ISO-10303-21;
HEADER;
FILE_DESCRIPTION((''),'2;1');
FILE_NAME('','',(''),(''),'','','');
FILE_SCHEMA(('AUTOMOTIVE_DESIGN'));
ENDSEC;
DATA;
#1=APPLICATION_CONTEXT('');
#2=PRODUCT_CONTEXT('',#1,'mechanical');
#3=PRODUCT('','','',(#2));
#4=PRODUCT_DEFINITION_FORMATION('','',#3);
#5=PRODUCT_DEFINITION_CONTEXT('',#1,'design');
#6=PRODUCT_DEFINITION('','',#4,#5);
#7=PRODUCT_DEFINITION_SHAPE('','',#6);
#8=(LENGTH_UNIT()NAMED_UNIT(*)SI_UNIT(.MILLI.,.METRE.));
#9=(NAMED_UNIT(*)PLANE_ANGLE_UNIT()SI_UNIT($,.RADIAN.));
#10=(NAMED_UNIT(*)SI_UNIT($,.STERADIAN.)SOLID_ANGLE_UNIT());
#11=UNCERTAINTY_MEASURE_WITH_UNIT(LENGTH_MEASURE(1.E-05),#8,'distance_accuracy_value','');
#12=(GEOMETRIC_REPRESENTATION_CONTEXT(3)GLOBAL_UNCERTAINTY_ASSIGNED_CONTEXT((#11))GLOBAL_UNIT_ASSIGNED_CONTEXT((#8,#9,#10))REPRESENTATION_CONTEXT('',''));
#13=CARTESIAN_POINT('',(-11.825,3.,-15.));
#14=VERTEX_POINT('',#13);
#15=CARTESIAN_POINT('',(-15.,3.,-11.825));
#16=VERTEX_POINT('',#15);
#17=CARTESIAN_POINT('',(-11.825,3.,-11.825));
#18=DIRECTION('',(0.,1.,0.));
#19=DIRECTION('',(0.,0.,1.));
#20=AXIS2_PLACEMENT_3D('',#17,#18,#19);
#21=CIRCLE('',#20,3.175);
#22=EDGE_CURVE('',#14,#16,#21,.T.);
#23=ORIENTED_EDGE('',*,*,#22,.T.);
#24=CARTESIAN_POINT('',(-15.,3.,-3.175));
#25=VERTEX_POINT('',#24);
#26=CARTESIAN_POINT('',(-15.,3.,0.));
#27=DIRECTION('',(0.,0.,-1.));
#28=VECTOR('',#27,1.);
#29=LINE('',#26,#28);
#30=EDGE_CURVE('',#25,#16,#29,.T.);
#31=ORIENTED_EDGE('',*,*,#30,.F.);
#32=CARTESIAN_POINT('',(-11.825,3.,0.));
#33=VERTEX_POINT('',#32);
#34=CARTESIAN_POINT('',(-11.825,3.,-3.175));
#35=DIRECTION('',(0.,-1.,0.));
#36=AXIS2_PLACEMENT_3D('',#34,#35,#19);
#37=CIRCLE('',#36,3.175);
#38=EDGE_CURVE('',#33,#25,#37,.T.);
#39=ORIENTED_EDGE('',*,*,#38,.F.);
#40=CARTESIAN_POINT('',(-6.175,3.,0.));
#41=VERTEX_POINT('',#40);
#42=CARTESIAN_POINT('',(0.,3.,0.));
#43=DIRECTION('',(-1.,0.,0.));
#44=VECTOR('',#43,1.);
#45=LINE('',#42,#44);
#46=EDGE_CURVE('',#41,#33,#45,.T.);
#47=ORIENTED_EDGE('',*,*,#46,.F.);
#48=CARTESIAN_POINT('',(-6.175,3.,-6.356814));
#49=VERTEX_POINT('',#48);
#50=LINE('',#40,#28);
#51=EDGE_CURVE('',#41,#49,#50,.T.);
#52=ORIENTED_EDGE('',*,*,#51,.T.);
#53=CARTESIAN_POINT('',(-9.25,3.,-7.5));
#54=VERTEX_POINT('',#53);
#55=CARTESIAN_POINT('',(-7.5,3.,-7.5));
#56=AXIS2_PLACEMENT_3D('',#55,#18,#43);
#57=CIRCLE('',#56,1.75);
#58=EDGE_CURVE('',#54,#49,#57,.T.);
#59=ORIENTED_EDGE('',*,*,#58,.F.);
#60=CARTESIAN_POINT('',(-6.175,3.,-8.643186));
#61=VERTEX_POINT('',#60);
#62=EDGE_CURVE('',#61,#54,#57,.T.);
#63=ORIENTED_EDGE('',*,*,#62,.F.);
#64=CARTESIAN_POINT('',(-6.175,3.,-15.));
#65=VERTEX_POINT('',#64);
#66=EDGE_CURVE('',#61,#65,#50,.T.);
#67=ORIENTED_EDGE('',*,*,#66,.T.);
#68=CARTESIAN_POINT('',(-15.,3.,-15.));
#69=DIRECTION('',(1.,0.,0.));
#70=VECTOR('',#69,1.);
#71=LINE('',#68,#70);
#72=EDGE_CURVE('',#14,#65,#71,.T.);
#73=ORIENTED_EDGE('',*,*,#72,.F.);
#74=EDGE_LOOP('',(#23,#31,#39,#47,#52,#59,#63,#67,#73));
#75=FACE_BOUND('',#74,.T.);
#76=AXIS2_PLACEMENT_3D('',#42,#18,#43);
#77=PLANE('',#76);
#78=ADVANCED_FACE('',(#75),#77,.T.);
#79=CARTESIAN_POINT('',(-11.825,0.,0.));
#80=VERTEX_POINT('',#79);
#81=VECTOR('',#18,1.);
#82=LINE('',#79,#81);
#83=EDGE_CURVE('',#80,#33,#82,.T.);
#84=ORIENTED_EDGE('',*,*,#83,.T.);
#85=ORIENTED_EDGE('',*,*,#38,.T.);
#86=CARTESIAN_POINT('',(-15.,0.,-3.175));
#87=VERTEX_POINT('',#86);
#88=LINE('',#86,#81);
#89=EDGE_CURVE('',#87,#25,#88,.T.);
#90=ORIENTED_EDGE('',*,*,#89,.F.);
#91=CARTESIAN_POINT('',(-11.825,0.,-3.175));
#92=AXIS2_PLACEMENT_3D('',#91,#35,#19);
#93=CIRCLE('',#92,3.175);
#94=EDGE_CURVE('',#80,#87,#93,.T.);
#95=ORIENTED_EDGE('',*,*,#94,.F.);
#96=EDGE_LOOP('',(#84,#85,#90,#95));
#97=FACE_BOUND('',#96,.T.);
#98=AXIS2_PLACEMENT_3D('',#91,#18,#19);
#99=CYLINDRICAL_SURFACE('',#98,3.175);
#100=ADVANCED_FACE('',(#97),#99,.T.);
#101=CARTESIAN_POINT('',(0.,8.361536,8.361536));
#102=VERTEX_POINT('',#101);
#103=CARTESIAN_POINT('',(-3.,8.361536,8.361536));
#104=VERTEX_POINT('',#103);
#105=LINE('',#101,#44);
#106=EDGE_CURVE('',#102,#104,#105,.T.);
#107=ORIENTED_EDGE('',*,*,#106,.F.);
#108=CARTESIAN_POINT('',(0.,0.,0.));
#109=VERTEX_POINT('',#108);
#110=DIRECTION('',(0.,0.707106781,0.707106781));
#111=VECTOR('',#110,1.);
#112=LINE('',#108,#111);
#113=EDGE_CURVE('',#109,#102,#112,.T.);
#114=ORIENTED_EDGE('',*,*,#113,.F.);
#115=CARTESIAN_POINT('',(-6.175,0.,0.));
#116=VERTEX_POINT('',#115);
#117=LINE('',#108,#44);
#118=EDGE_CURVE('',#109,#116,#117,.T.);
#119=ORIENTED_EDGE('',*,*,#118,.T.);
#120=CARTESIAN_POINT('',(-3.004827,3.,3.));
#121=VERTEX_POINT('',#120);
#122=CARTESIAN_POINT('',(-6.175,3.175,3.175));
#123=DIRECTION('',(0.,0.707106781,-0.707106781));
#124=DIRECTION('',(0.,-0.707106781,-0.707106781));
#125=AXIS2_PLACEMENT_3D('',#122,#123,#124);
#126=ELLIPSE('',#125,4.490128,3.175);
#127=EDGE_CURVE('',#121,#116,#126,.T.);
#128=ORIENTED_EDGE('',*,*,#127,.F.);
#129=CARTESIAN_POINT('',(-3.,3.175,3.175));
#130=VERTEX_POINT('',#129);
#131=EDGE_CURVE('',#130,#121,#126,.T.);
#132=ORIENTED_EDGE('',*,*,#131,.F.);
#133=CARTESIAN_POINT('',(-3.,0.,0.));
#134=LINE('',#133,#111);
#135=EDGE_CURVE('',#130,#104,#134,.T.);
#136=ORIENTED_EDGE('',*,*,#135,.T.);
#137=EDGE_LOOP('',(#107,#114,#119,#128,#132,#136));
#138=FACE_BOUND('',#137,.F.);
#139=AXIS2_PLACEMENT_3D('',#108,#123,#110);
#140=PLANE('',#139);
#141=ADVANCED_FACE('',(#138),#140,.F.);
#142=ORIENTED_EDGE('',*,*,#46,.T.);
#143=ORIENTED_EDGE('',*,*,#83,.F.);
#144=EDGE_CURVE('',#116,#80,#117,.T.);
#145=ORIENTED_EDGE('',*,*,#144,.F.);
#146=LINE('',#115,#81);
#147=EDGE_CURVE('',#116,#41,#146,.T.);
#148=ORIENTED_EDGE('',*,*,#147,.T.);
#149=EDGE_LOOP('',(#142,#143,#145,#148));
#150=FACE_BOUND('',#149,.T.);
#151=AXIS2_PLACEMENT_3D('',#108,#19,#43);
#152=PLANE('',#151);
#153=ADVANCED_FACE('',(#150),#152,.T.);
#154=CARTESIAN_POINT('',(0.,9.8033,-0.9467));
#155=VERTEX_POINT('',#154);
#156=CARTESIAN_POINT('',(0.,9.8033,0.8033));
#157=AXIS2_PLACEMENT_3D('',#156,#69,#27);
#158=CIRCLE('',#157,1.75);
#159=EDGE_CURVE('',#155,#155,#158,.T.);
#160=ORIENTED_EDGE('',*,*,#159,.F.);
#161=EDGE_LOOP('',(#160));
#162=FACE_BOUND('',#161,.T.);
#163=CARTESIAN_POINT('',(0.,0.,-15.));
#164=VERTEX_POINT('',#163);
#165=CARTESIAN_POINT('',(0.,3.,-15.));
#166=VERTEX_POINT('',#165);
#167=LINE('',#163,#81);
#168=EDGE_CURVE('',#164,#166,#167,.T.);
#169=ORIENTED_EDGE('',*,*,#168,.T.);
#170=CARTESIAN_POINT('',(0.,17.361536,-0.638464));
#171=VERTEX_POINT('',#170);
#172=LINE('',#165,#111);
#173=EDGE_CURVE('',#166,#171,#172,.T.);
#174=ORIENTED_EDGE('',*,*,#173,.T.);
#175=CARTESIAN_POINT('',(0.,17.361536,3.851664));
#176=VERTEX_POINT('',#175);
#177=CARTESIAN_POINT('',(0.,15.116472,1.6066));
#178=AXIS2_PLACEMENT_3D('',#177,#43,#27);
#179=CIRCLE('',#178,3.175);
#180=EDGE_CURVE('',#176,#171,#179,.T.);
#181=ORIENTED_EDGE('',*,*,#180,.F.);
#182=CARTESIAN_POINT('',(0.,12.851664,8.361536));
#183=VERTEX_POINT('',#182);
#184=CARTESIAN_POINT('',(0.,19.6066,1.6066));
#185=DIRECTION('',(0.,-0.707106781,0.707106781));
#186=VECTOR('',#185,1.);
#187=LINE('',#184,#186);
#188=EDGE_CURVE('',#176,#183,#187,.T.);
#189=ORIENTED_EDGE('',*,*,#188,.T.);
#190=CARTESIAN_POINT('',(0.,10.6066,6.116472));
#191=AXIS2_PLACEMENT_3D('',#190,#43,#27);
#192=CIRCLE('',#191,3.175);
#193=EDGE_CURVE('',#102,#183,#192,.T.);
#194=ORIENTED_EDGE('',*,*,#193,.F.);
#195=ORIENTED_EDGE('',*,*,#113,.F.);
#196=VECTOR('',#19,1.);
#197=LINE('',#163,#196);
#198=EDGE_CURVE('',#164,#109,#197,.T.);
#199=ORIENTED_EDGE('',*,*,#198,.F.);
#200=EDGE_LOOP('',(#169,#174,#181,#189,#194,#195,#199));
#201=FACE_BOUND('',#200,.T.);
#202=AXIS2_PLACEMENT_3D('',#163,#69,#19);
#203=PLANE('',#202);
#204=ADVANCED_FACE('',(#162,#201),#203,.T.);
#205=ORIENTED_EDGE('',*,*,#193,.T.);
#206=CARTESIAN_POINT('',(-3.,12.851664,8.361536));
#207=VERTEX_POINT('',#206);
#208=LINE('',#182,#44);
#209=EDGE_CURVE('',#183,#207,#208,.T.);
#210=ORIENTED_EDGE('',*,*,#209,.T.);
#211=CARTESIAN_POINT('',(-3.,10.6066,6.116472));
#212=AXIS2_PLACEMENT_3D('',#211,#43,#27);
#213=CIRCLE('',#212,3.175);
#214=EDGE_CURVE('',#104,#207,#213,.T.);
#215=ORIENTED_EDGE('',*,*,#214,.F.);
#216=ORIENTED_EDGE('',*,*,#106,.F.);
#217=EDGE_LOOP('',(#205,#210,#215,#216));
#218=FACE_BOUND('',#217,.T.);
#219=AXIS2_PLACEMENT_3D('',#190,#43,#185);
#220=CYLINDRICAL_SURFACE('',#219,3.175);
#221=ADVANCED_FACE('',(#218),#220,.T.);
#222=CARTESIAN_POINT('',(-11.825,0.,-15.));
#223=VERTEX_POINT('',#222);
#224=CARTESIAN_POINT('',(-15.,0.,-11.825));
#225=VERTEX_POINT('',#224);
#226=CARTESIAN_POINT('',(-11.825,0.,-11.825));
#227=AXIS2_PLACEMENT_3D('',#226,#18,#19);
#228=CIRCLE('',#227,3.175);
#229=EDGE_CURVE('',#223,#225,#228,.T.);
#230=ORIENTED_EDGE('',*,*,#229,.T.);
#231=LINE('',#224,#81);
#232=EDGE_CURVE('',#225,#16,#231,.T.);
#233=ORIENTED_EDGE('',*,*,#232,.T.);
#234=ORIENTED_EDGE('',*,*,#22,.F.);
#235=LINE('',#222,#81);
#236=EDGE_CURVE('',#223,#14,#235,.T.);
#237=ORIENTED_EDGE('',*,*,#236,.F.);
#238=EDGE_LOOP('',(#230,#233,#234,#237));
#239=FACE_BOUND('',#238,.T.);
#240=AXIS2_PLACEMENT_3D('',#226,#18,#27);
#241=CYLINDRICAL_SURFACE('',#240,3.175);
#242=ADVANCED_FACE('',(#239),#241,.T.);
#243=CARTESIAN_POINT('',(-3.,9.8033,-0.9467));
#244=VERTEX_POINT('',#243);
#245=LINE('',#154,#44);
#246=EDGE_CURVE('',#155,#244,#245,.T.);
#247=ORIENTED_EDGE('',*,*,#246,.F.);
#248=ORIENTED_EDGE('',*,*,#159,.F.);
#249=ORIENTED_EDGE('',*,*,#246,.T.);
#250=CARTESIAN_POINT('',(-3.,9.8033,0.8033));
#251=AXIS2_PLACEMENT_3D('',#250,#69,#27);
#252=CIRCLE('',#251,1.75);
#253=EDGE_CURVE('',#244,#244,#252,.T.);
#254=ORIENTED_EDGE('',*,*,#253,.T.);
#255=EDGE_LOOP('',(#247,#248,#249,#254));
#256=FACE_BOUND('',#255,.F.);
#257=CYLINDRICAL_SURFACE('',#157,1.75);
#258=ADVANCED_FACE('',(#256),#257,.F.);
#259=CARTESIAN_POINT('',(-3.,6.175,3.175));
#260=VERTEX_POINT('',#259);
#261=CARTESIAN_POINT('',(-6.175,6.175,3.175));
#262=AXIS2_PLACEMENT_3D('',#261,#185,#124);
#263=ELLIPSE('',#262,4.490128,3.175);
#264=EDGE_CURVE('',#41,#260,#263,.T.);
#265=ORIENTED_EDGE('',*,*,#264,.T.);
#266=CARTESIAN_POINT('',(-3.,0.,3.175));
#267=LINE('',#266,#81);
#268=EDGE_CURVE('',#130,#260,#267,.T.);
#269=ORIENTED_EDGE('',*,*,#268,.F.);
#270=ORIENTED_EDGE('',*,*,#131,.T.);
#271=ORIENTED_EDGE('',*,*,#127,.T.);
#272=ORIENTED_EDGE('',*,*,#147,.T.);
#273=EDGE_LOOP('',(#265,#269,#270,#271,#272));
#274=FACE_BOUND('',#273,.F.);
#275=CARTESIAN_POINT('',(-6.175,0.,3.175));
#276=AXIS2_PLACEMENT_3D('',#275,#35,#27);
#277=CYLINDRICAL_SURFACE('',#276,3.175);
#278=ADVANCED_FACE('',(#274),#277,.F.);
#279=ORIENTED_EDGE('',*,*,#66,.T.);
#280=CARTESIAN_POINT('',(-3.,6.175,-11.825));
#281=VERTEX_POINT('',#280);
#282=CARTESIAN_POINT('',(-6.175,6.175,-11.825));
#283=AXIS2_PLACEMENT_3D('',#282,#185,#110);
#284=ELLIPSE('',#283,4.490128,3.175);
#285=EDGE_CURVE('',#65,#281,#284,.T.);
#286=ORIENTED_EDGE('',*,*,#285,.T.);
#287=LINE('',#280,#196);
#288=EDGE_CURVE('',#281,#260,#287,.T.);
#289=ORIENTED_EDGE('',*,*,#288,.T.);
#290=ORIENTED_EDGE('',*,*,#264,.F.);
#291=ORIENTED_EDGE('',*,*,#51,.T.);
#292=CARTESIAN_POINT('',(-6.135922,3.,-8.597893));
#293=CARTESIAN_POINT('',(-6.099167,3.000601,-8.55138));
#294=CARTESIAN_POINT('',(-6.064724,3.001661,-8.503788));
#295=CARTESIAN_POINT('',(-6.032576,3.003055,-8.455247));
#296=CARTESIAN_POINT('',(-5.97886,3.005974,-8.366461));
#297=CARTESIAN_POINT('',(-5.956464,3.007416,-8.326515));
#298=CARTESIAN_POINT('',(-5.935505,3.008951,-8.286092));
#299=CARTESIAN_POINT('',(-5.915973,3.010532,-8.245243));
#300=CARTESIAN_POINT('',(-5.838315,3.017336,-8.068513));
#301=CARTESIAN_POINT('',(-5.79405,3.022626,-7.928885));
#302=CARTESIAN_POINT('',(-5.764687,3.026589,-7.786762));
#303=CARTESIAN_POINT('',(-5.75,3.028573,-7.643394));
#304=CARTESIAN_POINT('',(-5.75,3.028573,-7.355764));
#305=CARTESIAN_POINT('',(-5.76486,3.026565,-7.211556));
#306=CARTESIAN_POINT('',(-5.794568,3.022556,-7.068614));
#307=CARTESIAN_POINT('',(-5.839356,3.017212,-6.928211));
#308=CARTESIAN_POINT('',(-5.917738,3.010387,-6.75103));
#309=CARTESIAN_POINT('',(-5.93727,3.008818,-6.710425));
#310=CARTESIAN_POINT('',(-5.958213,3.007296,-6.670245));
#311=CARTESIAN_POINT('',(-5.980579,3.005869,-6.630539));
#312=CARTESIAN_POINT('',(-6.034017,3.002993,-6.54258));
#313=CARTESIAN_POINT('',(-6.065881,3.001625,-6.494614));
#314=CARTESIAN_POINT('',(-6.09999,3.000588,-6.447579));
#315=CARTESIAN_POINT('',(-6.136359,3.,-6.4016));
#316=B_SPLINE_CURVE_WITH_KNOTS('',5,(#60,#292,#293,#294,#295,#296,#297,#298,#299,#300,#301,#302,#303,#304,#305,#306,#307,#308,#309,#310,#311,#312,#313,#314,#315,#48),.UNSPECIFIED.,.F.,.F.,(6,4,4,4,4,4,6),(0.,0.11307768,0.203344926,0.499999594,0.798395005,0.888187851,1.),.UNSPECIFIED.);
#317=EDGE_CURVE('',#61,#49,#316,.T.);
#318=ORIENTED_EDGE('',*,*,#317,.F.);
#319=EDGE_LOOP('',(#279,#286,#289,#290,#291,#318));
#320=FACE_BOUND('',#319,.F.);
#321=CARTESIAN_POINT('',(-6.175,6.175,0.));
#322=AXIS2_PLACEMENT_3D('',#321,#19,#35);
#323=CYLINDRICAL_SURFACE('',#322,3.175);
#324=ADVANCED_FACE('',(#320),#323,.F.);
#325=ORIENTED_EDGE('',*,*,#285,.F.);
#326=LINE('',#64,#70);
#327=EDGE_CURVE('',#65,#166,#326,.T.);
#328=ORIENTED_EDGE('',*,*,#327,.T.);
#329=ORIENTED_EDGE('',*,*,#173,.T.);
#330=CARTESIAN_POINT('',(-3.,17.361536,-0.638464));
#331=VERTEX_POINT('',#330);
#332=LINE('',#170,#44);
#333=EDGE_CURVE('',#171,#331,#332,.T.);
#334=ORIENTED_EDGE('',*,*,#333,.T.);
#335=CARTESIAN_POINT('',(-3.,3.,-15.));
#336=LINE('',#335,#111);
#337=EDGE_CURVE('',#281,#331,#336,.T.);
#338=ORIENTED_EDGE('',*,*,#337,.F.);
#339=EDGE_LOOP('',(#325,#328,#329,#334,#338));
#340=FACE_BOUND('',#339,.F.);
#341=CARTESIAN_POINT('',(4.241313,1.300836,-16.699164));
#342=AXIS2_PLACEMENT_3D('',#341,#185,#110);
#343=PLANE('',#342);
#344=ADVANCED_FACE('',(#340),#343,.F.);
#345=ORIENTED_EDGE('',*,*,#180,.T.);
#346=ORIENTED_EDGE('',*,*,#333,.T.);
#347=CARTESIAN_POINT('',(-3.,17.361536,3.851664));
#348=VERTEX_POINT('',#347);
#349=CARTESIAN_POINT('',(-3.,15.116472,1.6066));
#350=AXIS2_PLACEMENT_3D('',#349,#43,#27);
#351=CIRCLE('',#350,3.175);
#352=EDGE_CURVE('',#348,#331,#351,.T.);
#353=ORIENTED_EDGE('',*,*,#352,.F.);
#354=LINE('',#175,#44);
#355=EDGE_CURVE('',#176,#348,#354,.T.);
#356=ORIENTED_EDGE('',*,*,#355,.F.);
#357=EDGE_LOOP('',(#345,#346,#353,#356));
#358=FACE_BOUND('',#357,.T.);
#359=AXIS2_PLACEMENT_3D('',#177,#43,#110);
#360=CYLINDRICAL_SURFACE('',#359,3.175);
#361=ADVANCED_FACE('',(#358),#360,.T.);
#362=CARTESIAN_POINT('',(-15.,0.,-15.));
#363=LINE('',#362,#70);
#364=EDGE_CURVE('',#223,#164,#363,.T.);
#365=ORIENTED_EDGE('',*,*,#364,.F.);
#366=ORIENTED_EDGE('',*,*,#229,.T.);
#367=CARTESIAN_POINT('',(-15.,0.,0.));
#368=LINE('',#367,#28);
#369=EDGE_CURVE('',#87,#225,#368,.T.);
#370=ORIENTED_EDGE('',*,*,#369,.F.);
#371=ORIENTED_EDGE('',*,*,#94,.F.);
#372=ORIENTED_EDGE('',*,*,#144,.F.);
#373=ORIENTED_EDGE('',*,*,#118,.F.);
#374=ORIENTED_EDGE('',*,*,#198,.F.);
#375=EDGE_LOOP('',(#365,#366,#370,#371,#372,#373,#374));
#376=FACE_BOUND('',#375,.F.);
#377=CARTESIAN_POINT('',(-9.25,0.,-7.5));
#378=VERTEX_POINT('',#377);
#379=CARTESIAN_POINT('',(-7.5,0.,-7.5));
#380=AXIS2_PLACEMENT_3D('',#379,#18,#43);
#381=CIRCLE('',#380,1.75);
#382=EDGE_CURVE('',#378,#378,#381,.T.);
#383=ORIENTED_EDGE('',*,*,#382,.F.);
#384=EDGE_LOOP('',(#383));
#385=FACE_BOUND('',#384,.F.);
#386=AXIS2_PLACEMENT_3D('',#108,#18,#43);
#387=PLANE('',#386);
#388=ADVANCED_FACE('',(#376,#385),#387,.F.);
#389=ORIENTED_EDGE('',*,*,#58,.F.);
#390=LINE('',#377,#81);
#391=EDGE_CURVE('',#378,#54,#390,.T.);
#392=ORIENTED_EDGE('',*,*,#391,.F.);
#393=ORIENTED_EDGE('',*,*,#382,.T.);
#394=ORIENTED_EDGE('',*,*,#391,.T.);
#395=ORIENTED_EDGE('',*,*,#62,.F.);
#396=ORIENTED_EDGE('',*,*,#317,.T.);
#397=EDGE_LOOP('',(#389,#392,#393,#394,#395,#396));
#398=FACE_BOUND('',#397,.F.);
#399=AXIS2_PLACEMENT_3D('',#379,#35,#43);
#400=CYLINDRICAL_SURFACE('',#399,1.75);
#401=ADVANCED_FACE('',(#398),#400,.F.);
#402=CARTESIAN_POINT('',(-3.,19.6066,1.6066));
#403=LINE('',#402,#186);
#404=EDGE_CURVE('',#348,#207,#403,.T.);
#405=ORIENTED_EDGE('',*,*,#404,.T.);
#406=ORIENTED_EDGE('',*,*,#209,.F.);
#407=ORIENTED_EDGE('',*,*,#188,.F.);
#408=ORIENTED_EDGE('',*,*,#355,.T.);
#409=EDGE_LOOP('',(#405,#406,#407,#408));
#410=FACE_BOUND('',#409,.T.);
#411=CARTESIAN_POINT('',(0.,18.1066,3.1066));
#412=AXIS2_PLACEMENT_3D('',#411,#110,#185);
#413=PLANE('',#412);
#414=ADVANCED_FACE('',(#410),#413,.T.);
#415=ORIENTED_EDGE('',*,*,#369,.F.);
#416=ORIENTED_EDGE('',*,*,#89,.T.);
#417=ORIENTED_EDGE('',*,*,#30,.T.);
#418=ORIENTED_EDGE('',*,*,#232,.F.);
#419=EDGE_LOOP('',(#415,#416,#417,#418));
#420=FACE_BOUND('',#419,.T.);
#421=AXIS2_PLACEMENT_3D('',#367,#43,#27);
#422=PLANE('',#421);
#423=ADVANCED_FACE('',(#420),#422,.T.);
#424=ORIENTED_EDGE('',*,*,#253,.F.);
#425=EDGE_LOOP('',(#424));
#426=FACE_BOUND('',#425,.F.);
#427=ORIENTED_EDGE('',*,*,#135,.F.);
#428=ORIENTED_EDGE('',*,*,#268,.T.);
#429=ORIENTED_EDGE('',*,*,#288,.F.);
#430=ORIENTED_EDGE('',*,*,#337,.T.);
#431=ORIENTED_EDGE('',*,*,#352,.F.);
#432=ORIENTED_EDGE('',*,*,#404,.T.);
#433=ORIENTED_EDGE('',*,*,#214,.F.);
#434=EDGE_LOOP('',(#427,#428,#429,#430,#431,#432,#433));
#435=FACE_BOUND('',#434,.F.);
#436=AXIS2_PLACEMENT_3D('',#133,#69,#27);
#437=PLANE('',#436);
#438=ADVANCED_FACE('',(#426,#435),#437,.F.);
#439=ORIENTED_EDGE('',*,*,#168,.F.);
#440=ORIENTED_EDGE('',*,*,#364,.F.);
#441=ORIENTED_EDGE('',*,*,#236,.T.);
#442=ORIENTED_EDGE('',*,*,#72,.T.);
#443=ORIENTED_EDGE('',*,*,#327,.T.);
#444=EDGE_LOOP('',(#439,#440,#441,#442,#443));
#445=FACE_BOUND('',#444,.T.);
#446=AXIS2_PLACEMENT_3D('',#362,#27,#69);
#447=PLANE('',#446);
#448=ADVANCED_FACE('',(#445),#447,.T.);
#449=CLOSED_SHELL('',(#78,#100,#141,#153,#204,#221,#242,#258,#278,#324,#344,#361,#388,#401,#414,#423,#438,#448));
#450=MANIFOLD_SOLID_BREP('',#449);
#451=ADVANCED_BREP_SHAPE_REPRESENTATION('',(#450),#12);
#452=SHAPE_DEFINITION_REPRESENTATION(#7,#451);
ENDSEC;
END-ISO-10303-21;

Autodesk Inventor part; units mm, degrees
ref_plane "YZ Plane" through (0, 0, 0) normal (1, 0, 0) x (0, 1, 0)
ref_plane "XZ Plane" through (0, 0, 0) normal (0, 1, 0) x (-1, 0, 0)
ref_plane "XY Plane" through (0, 0, 0) normal (0, 0, 1) x (1, 0, 0)
sketch "Sketch1" plane through (0, 0, 0) normal (0, 1, 0) x (-1, 0, 0)
  line L0 (0, 0) -> (15, 0)
  line L1 (15, 0) -> (15, -15)
  line L2 (15, -15) -> (0, -15)
  line L3 (0, -15) -> (0, 0)
  circle A0 centre (7.5, -7.5) radius 1.75
  dimension "d0" = 15
  dimension "d1" = 15
  dimension "d2" = 3.5
extrude "Extrusion1" add sketch "Sketch1" along normal blind 3
sketch "Sketch2" plane through (0, 0, 0) normal (1, 0, 0) x (0, 0, -1)
  line L0 (15, 0) -> (0, 0) projected
  line L1 (0, 0) -> (-10.6066, 10.6066)
  line L2 (0, 0) -> (15, 0) construction
  line L3 (15, 0) -> (40.6066, 0) construction
  line L4 (-3.1066, 18.1066) -> (-10.6066, 10.6066)
  line L5 (15, 3) -> (0, 3) projected
  line L6 (15, 3) -> (-1.6066, 19.6066)
  line L7 (15, 3) -> (38.4853, 3) construction
  line L8 (-1.6066, 19.6066) -> (-3.1066, 18.1066)
  line L9 (-1.6066, 19.6066) -> (-10.6066, 10.6066) construction
  line L10 (-6.1066, 15.1066) -> (7.5, 1.5) construction
  circle A0 centre (-0.8033, 9.8033) radius 1.75
  line L11 (15, 3) -> (15, 0)
  line L12 (0, 0) -> (15, 0)
  line L13 (15, 3) -> (-1.6066, 19.6066)
  line L14 (-1.6066, 19.6066) -> (-10.6066, 10.6066)
  line L15 (-10.6066, 10.6066) -> (0, 0)
  dimension "d5" = 15
  dimension "d6" = 135
  dimension "d10" = 135
  dimension "d12" = 3.5
  dimension "d13" = 7.5
extrude "Extrusion3" add sketch "Sketch2" against normal blind 3
fillet "Fillet1" radius 3.175 4 edges at (-15, 1.5, -15) (-15, 1.5, 0) (-1.5, 19.6066, 1.6066) (-1.5, 10.6066, 10.6066)
fillet "Fillet2" radius 3.175 2 edges at (-3, 3, -7.5) (-3, 1.5, 0)
properties part number "45 degree inside angle bracket_3DPrint"
